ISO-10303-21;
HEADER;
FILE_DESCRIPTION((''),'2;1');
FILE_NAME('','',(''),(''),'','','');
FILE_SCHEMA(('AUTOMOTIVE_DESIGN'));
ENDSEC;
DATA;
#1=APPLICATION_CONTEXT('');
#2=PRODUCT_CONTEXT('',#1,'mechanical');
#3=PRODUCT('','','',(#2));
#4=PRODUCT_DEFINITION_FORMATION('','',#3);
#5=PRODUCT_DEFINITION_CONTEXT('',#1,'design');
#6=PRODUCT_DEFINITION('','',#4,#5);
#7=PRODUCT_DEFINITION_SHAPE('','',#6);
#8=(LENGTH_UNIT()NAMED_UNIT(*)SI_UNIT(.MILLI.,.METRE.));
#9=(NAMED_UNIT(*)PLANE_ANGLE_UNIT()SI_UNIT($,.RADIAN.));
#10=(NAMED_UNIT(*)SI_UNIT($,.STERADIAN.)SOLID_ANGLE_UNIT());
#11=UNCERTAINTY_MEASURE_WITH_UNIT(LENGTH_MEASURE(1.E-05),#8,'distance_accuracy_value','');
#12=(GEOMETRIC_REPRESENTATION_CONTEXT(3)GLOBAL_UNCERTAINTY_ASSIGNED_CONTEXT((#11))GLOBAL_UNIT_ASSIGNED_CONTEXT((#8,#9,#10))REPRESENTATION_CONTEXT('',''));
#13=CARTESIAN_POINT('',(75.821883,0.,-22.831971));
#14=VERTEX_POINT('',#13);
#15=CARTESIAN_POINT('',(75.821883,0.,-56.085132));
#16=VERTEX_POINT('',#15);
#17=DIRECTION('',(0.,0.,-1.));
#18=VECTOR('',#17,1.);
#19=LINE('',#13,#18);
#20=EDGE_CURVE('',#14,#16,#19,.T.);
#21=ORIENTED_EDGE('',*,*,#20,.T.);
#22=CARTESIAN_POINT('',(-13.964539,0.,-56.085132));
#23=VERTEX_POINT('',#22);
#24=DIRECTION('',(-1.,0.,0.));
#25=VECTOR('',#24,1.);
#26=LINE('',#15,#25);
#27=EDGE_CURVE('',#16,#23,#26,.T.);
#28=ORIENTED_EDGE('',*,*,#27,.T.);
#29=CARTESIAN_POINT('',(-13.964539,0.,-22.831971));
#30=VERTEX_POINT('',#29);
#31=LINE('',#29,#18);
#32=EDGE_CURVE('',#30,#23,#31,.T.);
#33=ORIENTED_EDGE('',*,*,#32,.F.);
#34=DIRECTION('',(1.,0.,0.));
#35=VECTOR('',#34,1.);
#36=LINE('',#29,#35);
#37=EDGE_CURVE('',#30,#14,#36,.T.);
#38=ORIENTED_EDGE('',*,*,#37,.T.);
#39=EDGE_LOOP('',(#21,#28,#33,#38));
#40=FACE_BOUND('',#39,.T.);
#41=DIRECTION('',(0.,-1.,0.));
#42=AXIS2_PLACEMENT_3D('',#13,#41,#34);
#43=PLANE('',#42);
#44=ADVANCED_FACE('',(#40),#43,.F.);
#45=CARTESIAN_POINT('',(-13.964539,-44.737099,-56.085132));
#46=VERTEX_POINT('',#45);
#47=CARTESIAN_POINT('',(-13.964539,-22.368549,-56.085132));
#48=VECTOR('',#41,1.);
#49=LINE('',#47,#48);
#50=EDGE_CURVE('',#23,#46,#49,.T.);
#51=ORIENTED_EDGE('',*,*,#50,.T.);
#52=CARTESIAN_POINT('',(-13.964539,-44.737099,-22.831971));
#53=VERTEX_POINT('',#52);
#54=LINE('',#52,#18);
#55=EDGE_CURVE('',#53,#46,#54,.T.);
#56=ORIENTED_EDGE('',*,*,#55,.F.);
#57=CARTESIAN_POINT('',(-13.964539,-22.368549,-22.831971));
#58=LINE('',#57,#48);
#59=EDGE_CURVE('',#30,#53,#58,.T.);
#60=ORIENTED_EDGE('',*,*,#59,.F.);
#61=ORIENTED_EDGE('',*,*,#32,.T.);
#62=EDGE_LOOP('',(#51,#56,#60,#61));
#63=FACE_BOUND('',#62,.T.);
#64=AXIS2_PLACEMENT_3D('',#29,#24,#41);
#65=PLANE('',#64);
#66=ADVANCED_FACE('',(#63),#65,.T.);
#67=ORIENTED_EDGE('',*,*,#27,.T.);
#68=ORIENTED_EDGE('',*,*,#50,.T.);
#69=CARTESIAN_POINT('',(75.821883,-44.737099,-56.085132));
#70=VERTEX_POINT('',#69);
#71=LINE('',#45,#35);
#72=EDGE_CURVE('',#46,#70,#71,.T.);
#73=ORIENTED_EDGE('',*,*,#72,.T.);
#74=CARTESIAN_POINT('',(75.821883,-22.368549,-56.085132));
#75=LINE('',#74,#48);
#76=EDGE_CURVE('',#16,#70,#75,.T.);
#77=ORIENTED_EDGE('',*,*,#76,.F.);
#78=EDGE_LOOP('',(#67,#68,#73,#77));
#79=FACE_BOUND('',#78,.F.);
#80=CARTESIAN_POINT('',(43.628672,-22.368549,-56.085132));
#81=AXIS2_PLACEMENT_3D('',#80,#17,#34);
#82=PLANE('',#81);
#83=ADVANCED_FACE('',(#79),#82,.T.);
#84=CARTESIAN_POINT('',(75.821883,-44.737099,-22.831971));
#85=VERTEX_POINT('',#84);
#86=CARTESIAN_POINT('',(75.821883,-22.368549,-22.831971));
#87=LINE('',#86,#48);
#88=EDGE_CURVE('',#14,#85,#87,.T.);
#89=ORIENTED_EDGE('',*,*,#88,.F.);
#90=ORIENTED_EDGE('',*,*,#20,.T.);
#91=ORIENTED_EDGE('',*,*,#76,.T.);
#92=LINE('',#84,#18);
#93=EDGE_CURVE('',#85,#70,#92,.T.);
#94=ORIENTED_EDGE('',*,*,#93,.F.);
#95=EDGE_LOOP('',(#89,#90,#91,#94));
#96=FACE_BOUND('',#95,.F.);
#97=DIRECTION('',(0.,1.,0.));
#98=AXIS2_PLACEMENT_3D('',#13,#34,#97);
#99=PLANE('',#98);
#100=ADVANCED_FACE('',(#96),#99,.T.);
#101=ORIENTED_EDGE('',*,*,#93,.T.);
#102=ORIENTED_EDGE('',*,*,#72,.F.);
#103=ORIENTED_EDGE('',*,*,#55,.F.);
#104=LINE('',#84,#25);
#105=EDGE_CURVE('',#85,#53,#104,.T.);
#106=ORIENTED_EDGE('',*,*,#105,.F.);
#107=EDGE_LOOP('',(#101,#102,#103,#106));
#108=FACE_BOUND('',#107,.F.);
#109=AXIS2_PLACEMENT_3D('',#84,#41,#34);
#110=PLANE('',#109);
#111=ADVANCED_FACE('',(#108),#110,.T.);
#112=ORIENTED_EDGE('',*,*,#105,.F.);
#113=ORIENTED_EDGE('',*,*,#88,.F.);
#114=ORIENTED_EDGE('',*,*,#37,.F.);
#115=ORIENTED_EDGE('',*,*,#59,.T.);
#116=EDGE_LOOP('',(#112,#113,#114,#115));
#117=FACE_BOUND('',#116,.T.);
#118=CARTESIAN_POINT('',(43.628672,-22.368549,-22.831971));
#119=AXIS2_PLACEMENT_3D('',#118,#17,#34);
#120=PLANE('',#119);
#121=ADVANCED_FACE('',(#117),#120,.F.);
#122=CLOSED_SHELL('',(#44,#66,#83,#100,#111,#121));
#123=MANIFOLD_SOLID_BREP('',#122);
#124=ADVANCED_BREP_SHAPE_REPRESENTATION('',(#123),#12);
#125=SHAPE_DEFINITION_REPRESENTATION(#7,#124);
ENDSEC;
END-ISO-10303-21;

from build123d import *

# Parameters (mm, degrees)
F1_E1_W  = 64.3864218146
F1_E1_H  = 44.7370987386
F2_DEPTH = 33.2531612366


# Not quite as in the source:
# - a feature of the source that left no trace in its solid (it failed there, or was rolled back) is left out
# - a pattern or mirror of a feature is missing from the dataset's text; its kind, count and spacing are read off the source's solid


with BuildPart() as f2:
    # F1_E1 (on explicit) → F2 (new body)
    with BuildSketch(Plane(origin=(-13.9645393938, 0, -22.8319708258), x_dir=(1, 0, 0), z_dir=(0, 0, -1))):
        with Locations((32.1932109073, 22.3685493693)):
            Rectangle(F1_E1_W, F1_E1_H)
    extrude(amount=F2_DEPTH)

    # F2_copies: F2 across plane


with BuildPart() as f2_1:
    add(f2.part)
    add(f2.part.mirror(Plane(origin=(30.928672, 0, 0), x_dir=(0, 0, 1), z_dir=(1, 0, 0))))


solid = f2_1.part
